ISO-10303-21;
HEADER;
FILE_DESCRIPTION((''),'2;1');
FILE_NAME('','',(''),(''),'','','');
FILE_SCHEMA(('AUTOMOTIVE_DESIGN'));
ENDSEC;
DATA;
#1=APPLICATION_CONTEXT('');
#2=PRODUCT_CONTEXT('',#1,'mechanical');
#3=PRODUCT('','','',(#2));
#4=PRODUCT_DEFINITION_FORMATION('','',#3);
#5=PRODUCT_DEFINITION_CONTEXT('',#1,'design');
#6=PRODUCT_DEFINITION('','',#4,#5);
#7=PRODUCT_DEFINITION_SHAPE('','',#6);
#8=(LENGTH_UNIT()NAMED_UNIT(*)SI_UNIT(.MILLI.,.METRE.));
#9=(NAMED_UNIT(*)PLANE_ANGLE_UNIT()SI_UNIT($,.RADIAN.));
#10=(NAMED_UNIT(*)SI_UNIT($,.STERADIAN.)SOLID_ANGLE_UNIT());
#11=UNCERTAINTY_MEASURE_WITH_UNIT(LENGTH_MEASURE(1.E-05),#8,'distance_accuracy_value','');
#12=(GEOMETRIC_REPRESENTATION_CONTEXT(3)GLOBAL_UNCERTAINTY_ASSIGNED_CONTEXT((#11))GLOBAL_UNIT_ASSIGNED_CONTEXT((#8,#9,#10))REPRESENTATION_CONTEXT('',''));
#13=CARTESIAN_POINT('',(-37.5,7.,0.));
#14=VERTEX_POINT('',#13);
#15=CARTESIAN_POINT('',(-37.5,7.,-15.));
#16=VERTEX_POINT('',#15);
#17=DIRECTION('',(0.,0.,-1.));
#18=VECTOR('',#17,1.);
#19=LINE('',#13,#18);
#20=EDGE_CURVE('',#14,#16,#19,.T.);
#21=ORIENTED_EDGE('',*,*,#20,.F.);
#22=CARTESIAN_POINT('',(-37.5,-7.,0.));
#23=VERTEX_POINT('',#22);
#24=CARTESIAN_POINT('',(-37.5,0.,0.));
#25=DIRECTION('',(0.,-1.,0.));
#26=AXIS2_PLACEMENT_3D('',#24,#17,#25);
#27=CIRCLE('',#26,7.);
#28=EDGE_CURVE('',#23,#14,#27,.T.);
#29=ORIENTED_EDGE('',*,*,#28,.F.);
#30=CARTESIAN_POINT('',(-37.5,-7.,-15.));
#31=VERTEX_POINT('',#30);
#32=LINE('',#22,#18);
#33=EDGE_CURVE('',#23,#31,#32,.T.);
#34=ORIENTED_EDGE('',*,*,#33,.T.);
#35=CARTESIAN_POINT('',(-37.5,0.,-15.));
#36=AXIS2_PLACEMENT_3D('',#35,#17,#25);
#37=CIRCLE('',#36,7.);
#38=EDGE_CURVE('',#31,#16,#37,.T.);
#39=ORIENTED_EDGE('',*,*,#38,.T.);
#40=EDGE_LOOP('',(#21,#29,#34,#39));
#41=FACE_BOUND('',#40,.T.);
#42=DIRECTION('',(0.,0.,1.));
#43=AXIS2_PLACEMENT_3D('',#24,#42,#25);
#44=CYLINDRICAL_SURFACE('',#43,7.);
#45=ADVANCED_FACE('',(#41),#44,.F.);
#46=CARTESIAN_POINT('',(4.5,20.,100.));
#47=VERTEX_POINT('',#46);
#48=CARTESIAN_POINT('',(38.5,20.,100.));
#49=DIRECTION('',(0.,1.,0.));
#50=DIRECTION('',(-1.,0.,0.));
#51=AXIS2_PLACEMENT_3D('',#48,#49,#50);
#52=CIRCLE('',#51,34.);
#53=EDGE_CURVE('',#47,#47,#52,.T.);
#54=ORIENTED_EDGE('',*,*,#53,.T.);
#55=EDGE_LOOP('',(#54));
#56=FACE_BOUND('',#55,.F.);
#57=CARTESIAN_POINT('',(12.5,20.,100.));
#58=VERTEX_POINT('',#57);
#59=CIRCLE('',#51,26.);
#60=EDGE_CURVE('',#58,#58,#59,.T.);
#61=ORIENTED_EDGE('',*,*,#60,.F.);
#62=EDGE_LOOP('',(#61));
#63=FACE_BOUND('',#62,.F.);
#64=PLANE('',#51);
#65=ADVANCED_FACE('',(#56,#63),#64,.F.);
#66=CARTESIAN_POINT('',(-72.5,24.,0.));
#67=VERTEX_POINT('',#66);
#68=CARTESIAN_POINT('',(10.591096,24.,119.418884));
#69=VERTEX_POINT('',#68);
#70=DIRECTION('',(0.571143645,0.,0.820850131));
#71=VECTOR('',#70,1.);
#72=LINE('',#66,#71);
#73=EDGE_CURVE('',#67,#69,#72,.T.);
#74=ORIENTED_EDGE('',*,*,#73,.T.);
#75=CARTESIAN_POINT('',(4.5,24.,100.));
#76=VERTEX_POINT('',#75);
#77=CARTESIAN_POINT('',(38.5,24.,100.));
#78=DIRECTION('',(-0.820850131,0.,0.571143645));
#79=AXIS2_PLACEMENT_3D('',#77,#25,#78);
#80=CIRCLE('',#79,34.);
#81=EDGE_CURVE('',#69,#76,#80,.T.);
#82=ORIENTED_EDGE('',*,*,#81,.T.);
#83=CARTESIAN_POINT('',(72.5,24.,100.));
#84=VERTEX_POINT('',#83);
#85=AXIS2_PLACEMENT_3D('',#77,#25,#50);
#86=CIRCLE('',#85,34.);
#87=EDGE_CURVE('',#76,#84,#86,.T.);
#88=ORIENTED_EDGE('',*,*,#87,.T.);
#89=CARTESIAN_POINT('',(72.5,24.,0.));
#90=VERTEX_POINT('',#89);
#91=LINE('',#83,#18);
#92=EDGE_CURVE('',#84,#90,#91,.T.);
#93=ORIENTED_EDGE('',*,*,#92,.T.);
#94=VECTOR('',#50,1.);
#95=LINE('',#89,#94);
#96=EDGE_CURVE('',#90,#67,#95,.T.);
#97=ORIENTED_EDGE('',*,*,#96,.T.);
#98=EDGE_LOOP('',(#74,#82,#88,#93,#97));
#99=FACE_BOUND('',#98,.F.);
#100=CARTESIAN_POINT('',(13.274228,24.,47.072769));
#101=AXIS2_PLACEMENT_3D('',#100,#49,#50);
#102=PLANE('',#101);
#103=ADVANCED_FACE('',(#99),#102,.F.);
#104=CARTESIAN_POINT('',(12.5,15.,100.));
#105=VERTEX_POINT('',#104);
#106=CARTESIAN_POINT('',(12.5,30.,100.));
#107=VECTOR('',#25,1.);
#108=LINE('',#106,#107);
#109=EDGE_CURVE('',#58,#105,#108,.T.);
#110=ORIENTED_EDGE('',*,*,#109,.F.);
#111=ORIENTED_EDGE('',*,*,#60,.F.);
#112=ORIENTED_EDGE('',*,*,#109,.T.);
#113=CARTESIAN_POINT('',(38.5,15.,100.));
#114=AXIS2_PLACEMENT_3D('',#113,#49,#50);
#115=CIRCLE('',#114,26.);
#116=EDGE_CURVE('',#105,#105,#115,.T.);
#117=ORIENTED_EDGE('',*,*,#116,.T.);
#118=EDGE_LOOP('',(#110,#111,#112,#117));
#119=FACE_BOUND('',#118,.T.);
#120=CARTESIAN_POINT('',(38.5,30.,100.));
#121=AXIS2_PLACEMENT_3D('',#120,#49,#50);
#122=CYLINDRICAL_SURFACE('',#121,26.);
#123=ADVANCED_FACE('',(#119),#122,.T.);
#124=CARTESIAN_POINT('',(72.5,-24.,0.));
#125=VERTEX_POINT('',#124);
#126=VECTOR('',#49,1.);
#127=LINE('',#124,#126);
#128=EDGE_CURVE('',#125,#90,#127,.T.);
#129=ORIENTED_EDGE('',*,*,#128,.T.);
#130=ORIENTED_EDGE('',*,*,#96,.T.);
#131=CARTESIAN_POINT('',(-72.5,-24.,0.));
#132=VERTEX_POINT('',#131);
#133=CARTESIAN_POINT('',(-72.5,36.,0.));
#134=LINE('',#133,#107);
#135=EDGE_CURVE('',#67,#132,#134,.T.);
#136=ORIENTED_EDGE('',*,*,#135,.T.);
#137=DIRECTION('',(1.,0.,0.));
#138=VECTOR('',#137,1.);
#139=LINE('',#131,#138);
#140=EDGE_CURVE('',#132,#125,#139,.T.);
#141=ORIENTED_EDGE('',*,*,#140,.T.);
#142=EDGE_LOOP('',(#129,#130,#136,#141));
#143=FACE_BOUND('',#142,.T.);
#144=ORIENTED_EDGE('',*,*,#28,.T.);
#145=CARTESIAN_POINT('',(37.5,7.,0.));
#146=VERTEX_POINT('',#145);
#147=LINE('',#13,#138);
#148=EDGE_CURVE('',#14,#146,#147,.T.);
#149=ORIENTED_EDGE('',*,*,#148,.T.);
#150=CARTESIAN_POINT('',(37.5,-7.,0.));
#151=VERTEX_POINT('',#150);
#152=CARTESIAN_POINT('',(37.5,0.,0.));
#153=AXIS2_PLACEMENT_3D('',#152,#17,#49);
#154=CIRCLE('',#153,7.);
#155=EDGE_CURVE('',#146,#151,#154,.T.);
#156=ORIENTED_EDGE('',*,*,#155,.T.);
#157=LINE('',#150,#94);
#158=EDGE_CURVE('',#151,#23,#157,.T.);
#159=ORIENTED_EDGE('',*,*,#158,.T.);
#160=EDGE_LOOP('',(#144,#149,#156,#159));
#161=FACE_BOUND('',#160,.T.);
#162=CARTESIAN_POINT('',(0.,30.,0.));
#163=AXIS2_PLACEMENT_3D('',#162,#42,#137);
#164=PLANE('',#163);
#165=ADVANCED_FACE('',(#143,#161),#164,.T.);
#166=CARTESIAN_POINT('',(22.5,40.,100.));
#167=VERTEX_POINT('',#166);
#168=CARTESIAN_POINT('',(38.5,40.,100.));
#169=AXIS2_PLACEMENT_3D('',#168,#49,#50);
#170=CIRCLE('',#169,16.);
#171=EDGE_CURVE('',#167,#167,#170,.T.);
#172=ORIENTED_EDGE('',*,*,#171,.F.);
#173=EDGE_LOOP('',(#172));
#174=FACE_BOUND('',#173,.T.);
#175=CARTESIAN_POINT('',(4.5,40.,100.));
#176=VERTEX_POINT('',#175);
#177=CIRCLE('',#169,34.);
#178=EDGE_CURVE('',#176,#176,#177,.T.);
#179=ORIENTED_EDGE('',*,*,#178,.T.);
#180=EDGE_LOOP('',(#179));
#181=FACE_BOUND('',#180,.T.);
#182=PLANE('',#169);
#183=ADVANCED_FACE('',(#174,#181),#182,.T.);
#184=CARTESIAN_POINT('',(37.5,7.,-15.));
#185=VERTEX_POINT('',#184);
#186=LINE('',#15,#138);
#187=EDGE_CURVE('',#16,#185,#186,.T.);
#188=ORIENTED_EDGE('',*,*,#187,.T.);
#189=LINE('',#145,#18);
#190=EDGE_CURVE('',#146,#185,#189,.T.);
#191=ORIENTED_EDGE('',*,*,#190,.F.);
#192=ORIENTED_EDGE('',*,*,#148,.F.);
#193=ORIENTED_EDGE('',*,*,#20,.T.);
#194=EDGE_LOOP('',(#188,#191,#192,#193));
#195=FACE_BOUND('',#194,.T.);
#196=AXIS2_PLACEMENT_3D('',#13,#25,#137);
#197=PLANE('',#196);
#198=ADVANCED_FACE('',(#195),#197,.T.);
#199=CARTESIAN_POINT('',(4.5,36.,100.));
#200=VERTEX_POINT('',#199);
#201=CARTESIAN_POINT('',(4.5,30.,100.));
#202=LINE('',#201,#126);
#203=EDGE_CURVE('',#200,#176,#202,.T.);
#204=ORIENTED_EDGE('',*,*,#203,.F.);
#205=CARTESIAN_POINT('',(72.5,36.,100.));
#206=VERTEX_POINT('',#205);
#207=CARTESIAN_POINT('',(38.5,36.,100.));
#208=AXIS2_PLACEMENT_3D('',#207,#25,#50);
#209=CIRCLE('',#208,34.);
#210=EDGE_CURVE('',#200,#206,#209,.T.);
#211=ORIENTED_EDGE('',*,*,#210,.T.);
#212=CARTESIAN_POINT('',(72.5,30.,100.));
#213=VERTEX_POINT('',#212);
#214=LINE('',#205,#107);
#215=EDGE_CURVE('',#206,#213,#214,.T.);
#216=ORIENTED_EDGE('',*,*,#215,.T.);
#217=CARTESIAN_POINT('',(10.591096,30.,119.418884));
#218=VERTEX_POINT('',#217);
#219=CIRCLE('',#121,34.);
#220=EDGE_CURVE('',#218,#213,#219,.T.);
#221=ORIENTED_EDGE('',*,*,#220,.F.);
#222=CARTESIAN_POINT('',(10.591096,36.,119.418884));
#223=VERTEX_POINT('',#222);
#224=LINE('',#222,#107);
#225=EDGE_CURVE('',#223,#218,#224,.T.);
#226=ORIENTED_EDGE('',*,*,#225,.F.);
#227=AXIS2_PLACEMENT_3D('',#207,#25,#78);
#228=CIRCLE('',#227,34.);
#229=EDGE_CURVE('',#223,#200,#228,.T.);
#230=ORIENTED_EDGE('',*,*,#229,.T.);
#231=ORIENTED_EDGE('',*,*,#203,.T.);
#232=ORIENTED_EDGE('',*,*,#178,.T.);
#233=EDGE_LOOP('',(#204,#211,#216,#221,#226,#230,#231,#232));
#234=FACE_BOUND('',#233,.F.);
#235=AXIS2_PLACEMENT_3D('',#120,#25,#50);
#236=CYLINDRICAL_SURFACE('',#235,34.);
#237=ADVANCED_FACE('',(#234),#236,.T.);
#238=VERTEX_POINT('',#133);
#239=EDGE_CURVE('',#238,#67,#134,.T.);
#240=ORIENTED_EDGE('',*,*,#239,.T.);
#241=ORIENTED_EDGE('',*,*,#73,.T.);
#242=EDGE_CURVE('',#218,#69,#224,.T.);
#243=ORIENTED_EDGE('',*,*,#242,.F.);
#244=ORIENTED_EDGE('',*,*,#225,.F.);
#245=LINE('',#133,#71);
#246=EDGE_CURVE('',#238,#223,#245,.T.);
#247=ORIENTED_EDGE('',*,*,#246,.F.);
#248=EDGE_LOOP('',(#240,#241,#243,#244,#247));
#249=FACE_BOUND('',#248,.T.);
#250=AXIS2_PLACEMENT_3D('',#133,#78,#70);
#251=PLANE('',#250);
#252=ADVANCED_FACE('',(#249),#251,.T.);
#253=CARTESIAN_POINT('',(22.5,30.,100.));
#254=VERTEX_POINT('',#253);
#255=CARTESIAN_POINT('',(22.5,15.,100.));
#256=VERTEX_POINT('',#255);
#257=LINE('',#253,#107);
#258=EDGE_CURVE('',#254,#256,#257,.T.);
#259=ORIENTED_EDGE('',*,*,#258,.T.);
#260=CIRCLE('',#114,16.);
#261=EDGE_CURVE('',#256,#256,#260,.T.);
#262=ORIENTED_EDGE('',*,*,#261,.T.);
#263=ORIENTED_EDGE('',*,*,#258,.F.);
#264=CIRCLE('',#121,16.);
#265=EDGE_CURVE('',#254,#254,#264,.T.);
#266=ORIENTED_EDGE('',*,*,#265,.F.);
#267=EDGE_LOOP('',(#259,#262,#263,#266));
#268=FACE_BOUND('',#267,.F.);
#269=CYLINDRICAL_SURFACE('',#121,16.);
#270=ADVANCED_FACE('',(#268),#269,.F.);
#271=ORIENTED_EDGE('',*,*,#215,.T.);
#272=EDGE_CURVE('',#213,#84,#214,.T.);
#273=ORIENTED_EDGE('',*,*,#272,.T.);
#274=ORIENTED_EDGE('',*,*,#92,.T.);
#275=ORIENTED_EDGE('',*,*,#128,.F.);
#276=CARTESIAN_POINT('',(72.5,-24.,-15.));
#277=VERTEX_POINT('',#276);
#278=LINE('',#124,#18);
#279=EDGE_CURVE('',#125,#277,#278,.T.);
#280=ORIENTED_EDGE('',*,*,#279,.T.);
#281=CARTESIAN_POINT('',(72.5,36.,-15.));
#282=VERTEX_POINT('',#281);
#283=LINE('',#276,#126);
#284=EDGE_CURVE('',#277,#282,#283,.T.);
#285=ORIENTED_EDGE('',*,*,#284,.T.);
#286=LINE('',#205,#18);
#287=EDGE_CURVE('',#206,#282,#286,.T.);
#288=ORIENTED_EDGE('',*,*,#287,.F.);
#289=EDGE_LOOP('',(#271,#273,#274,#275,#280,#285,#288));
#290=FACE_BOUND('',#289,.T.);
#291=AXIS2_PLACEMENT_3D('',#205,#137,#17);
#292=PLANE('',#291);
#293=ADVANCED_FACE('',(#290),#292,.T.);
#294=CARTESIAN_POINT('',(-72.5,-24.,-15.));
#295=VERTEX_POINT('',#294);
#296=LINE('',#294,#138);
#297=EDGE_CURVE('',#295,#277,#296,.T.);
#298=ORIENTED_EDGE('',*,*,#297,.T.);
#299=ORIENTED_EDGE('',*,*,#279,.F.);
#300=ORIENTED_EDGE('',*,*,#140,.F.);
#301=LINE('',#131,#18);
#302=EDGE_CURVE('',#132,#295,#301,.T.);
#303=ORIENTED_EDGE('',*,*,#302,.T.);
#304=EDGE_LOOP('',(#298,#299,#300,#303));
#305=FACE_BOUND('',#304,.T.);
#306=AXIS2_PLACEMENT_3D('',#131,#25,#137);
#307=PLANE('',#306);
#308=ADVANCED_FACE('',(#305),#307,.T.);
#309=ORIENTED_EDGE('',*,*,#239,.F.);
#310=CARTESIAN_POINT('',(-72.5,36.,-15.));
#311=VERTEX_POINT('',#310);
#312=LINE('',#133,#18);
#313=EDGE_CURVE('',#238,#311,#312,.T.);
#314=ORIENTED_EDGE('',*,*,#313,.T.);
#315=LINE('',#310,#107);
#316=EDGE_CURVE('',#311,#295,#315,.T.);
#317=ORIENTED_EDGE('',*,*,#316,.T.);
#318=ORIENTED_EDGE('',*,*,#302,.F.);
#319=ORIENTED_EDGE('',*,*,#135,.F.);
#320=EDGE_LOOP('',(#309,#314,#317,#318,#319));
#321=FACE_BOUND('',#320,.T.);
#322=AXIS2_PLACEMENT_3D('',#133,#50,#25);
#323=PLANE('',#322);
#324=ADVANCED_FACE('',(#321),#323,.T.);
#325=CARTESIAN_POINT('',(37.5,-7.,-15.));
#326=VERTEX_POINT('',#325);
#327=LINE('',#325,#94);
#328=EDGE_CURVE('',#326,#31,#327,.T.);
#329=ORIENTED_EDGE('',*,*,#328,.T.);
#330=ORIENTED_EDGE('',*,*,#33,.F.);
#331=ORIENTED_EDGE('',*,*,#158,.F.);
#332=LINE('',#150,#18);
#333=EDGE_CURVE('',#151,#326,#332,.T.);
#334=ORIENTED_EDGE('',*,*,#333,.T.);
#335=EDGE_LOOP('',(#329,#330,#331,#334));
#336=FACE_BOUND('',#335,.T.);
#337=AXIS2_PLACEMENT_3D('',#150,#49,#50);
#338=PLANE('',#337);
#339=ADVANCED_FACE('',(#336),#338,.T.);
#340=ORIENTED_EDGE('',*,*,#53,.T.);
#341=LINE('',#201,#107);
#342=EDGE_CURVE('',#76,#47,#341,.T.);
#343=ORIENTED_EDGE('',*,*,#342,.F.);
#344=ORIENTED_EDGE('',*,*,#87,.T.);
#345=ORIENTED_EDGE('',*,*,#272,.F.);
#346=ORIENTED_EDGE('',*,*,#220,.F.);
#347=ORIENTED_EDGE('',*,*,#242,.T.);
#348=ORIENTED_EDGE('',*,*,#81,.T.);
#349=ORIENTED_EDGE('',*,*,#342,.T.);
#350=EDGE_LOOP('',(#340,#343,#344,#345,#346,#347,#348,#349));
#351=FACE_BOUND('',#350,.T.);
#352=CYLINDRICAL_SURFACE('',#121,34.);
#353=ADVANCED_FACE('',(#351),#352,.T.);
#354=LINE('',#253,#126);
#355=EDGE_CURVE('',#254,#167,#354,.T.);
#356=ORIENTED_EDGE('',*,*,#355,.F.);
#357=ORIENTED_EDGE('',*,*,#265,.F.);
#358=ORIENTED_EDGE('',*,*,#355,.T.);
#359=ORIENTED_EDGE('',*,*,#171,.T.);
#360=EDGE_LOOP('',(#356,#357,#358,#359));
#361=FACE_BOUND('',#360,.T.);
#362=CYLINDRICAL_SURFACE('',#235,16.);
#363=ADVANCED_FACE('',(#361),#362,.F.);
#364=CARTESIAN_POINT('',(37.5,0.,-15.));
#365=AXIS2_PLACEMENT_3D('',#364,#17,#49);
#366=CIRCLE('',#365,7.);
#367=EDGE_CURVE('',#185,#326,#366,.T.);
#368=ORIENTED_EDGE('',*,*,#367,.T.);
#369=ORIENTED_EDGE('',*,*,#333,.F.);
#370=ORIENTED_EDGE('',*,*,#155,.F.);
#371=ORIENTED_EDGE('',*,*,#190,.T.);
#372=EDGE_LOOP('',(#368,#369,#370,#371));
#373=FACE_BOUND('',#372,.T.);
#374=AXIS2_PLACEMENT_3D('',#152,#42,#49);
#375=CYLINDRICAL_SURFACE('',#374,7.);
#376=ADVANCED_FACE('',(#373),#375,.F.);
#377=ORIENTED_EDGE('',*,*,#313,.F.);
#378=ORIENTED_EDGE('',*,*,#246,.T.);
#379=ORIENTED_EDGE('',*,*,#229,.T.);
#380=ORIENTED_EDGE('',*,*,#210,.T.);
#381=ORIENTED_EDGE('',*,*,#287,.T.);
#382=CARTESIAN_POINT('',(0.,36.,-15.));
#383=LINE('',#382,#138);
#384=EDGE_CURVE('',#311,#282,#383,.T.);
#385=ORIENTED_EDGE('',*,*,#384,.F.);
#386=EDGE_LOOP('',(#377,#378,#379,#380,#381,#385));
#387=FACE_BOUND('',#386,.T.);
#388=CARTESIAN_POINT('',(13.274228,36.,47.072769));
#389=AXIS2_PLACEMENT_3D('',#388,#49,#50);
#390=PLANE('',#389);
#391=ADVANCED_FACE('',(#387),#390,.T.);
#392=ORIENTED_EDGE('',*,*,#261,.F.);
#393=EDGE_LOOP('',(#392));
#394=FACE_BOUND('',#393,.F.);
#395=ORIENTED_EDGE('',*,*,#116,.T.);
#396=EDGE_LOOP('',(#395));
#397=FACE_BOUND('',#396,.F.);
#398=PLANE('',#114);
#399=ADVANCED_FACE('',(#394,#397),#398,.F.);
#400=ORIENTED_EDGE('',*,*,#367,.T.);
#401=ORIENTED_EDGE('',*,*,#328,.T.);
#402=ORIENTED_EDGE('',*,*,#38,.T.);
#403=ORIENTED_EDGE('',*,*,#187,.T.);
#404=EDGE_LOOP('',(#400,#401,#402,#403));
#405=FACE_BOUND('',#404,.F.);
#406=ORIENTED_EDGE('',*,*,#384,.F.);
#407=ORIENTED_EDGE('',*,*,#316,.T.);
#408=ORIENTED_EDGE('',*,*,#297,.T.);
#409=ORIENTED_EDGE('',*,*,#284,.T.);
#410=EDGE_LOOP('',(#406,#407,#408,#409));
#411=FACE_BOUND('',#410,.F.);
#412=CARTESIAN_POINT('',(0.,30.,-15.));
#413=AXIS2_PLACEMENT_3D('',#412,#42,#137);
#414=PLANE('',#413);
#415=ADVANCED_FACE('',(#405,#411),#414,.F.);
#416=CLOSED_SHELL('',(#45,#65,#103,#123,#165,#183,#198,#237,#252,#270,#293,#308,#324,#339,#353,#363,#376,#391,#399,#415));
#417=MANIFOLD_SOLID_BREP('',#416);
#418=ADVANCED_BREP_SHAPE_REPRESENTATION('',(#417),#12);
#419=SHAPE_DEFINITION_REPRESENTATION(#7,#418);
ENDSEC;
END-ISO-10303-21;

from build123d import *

# Parameters (mm, degrees)
F0_W     = 145
F0_H     = 12
F1_DEPTH = 15
F4_DEPTH = 12
F6_R     = 26
F6_R_2   = 16
F7_DEPTH = 10
F8_DEPTH = 10
F9_DEPTH = 15


with BuildPart() as f1:
    # F0 (on Top) → F1 (new body)
    with BuildSketch(Plane.XY):
        with Locations((0, 30)):
            Rectangle(F0_W, F0_H)
        Polygon((-72.5, 24), (-72.5, 0), (-72.5, -24), (-37.5, -24), (37.5, -24), (72.5, -24), (72.5, 0), (72.5, 24), align=None)
        with BuildLine():
            Line((37.5, -7), (-37.5, -7))
            ThreePointArc((-37.5, -7), (-44.5, 0), (-37.5, 7))
            Line((-37.5, 7), (37.5, 7))
            ThreePointArc((37.5, 7), (44.5, 0), (37.5, -7))
        make_face(mode=Mode.SUBTRACT)
    extrude(amount=-F1_DEPTH)

    # F3 (on offset) → F4 (join)
    with BuildSketch(Plane(origin=(0, 36, 0), x_dir=(-1, 0, 0), z_dir=(0, 1, 0))):
        with BuildLine():
            ThreePointArc((-10.5910955607, 119.4188839277), (-6.0584930148, 110.1758844594), (-4.5, 100))
            ThreePointArc((-4.5, 100), (-38.5, 66), (-72.5, 100))
            Line((-72.5, 100), (-72.5, 0))
            Line((-72.5, 0), (72.5, 0))
            Line((72.5, 0), (-10.5910955607, 119.4188839277))
        make_face()
    extrude(amount=-F4_DEPTH)

    # F6 (on offset) → F7 (join)
    with BuildSketch(Plane(origin=(0, 30, 0), x_dir=(-1, 0, 0), z_dir=(0, 1, 0))):
        with BuildLine():
            ThreePointArc((-72.5, 100), (-38.5, 66), (-4.5, 100))
            ThreePointArc((-4.5, 100), (-38.5, 134), (-72.5, 100))
        make_face()
        with Locations((-38.5, 100)):
            Circle(F6_R, mode=Mode.SUBTRACT)
        with Locations((-38.5, 100)):
            Circle(F6_R)
        with Locations((-38.5, 100)):
            Circle(F6_R_2, mode=Mode.SUBTRACT)
    extrude(amount=F7_DEPTH)

    # F6 (on offset) → F8 (join)
    with BuildSketch(Plane(origin=(0, 30, 0), x_dir=(-1, 0, 0), z_dir=(0, 1, 0))):
        with BuildLine():
            ThreePointArc((-72.5, 100), (-38.5, 66), (-4.5, 100))
            ThreePointArc((-4.5, 100), (-38.5, 134), (-72.5, 100))
        make_face()
        with Locations((-38.5, 100)):
            Circle(F6_R, mode=Mode.SUBTRACT)
    extrude(amount=-F8_DEPTH)

    # F6 (on offset) → F9 (join)
    with BuildSketch(Plane(origin=(0, 30, 0), x_dir=(-1, 0, 0), z_dir=(0, 1, 0))):
        with Locations((-38.5, 100)):
            Circle(F6_R)
        with Locations((-38.5, 100)):
            Circle(F6_R_2, mode=Mode.SUBTRACT)
    extrude(amount=-F9_DEPTH)


solid = f1.part
